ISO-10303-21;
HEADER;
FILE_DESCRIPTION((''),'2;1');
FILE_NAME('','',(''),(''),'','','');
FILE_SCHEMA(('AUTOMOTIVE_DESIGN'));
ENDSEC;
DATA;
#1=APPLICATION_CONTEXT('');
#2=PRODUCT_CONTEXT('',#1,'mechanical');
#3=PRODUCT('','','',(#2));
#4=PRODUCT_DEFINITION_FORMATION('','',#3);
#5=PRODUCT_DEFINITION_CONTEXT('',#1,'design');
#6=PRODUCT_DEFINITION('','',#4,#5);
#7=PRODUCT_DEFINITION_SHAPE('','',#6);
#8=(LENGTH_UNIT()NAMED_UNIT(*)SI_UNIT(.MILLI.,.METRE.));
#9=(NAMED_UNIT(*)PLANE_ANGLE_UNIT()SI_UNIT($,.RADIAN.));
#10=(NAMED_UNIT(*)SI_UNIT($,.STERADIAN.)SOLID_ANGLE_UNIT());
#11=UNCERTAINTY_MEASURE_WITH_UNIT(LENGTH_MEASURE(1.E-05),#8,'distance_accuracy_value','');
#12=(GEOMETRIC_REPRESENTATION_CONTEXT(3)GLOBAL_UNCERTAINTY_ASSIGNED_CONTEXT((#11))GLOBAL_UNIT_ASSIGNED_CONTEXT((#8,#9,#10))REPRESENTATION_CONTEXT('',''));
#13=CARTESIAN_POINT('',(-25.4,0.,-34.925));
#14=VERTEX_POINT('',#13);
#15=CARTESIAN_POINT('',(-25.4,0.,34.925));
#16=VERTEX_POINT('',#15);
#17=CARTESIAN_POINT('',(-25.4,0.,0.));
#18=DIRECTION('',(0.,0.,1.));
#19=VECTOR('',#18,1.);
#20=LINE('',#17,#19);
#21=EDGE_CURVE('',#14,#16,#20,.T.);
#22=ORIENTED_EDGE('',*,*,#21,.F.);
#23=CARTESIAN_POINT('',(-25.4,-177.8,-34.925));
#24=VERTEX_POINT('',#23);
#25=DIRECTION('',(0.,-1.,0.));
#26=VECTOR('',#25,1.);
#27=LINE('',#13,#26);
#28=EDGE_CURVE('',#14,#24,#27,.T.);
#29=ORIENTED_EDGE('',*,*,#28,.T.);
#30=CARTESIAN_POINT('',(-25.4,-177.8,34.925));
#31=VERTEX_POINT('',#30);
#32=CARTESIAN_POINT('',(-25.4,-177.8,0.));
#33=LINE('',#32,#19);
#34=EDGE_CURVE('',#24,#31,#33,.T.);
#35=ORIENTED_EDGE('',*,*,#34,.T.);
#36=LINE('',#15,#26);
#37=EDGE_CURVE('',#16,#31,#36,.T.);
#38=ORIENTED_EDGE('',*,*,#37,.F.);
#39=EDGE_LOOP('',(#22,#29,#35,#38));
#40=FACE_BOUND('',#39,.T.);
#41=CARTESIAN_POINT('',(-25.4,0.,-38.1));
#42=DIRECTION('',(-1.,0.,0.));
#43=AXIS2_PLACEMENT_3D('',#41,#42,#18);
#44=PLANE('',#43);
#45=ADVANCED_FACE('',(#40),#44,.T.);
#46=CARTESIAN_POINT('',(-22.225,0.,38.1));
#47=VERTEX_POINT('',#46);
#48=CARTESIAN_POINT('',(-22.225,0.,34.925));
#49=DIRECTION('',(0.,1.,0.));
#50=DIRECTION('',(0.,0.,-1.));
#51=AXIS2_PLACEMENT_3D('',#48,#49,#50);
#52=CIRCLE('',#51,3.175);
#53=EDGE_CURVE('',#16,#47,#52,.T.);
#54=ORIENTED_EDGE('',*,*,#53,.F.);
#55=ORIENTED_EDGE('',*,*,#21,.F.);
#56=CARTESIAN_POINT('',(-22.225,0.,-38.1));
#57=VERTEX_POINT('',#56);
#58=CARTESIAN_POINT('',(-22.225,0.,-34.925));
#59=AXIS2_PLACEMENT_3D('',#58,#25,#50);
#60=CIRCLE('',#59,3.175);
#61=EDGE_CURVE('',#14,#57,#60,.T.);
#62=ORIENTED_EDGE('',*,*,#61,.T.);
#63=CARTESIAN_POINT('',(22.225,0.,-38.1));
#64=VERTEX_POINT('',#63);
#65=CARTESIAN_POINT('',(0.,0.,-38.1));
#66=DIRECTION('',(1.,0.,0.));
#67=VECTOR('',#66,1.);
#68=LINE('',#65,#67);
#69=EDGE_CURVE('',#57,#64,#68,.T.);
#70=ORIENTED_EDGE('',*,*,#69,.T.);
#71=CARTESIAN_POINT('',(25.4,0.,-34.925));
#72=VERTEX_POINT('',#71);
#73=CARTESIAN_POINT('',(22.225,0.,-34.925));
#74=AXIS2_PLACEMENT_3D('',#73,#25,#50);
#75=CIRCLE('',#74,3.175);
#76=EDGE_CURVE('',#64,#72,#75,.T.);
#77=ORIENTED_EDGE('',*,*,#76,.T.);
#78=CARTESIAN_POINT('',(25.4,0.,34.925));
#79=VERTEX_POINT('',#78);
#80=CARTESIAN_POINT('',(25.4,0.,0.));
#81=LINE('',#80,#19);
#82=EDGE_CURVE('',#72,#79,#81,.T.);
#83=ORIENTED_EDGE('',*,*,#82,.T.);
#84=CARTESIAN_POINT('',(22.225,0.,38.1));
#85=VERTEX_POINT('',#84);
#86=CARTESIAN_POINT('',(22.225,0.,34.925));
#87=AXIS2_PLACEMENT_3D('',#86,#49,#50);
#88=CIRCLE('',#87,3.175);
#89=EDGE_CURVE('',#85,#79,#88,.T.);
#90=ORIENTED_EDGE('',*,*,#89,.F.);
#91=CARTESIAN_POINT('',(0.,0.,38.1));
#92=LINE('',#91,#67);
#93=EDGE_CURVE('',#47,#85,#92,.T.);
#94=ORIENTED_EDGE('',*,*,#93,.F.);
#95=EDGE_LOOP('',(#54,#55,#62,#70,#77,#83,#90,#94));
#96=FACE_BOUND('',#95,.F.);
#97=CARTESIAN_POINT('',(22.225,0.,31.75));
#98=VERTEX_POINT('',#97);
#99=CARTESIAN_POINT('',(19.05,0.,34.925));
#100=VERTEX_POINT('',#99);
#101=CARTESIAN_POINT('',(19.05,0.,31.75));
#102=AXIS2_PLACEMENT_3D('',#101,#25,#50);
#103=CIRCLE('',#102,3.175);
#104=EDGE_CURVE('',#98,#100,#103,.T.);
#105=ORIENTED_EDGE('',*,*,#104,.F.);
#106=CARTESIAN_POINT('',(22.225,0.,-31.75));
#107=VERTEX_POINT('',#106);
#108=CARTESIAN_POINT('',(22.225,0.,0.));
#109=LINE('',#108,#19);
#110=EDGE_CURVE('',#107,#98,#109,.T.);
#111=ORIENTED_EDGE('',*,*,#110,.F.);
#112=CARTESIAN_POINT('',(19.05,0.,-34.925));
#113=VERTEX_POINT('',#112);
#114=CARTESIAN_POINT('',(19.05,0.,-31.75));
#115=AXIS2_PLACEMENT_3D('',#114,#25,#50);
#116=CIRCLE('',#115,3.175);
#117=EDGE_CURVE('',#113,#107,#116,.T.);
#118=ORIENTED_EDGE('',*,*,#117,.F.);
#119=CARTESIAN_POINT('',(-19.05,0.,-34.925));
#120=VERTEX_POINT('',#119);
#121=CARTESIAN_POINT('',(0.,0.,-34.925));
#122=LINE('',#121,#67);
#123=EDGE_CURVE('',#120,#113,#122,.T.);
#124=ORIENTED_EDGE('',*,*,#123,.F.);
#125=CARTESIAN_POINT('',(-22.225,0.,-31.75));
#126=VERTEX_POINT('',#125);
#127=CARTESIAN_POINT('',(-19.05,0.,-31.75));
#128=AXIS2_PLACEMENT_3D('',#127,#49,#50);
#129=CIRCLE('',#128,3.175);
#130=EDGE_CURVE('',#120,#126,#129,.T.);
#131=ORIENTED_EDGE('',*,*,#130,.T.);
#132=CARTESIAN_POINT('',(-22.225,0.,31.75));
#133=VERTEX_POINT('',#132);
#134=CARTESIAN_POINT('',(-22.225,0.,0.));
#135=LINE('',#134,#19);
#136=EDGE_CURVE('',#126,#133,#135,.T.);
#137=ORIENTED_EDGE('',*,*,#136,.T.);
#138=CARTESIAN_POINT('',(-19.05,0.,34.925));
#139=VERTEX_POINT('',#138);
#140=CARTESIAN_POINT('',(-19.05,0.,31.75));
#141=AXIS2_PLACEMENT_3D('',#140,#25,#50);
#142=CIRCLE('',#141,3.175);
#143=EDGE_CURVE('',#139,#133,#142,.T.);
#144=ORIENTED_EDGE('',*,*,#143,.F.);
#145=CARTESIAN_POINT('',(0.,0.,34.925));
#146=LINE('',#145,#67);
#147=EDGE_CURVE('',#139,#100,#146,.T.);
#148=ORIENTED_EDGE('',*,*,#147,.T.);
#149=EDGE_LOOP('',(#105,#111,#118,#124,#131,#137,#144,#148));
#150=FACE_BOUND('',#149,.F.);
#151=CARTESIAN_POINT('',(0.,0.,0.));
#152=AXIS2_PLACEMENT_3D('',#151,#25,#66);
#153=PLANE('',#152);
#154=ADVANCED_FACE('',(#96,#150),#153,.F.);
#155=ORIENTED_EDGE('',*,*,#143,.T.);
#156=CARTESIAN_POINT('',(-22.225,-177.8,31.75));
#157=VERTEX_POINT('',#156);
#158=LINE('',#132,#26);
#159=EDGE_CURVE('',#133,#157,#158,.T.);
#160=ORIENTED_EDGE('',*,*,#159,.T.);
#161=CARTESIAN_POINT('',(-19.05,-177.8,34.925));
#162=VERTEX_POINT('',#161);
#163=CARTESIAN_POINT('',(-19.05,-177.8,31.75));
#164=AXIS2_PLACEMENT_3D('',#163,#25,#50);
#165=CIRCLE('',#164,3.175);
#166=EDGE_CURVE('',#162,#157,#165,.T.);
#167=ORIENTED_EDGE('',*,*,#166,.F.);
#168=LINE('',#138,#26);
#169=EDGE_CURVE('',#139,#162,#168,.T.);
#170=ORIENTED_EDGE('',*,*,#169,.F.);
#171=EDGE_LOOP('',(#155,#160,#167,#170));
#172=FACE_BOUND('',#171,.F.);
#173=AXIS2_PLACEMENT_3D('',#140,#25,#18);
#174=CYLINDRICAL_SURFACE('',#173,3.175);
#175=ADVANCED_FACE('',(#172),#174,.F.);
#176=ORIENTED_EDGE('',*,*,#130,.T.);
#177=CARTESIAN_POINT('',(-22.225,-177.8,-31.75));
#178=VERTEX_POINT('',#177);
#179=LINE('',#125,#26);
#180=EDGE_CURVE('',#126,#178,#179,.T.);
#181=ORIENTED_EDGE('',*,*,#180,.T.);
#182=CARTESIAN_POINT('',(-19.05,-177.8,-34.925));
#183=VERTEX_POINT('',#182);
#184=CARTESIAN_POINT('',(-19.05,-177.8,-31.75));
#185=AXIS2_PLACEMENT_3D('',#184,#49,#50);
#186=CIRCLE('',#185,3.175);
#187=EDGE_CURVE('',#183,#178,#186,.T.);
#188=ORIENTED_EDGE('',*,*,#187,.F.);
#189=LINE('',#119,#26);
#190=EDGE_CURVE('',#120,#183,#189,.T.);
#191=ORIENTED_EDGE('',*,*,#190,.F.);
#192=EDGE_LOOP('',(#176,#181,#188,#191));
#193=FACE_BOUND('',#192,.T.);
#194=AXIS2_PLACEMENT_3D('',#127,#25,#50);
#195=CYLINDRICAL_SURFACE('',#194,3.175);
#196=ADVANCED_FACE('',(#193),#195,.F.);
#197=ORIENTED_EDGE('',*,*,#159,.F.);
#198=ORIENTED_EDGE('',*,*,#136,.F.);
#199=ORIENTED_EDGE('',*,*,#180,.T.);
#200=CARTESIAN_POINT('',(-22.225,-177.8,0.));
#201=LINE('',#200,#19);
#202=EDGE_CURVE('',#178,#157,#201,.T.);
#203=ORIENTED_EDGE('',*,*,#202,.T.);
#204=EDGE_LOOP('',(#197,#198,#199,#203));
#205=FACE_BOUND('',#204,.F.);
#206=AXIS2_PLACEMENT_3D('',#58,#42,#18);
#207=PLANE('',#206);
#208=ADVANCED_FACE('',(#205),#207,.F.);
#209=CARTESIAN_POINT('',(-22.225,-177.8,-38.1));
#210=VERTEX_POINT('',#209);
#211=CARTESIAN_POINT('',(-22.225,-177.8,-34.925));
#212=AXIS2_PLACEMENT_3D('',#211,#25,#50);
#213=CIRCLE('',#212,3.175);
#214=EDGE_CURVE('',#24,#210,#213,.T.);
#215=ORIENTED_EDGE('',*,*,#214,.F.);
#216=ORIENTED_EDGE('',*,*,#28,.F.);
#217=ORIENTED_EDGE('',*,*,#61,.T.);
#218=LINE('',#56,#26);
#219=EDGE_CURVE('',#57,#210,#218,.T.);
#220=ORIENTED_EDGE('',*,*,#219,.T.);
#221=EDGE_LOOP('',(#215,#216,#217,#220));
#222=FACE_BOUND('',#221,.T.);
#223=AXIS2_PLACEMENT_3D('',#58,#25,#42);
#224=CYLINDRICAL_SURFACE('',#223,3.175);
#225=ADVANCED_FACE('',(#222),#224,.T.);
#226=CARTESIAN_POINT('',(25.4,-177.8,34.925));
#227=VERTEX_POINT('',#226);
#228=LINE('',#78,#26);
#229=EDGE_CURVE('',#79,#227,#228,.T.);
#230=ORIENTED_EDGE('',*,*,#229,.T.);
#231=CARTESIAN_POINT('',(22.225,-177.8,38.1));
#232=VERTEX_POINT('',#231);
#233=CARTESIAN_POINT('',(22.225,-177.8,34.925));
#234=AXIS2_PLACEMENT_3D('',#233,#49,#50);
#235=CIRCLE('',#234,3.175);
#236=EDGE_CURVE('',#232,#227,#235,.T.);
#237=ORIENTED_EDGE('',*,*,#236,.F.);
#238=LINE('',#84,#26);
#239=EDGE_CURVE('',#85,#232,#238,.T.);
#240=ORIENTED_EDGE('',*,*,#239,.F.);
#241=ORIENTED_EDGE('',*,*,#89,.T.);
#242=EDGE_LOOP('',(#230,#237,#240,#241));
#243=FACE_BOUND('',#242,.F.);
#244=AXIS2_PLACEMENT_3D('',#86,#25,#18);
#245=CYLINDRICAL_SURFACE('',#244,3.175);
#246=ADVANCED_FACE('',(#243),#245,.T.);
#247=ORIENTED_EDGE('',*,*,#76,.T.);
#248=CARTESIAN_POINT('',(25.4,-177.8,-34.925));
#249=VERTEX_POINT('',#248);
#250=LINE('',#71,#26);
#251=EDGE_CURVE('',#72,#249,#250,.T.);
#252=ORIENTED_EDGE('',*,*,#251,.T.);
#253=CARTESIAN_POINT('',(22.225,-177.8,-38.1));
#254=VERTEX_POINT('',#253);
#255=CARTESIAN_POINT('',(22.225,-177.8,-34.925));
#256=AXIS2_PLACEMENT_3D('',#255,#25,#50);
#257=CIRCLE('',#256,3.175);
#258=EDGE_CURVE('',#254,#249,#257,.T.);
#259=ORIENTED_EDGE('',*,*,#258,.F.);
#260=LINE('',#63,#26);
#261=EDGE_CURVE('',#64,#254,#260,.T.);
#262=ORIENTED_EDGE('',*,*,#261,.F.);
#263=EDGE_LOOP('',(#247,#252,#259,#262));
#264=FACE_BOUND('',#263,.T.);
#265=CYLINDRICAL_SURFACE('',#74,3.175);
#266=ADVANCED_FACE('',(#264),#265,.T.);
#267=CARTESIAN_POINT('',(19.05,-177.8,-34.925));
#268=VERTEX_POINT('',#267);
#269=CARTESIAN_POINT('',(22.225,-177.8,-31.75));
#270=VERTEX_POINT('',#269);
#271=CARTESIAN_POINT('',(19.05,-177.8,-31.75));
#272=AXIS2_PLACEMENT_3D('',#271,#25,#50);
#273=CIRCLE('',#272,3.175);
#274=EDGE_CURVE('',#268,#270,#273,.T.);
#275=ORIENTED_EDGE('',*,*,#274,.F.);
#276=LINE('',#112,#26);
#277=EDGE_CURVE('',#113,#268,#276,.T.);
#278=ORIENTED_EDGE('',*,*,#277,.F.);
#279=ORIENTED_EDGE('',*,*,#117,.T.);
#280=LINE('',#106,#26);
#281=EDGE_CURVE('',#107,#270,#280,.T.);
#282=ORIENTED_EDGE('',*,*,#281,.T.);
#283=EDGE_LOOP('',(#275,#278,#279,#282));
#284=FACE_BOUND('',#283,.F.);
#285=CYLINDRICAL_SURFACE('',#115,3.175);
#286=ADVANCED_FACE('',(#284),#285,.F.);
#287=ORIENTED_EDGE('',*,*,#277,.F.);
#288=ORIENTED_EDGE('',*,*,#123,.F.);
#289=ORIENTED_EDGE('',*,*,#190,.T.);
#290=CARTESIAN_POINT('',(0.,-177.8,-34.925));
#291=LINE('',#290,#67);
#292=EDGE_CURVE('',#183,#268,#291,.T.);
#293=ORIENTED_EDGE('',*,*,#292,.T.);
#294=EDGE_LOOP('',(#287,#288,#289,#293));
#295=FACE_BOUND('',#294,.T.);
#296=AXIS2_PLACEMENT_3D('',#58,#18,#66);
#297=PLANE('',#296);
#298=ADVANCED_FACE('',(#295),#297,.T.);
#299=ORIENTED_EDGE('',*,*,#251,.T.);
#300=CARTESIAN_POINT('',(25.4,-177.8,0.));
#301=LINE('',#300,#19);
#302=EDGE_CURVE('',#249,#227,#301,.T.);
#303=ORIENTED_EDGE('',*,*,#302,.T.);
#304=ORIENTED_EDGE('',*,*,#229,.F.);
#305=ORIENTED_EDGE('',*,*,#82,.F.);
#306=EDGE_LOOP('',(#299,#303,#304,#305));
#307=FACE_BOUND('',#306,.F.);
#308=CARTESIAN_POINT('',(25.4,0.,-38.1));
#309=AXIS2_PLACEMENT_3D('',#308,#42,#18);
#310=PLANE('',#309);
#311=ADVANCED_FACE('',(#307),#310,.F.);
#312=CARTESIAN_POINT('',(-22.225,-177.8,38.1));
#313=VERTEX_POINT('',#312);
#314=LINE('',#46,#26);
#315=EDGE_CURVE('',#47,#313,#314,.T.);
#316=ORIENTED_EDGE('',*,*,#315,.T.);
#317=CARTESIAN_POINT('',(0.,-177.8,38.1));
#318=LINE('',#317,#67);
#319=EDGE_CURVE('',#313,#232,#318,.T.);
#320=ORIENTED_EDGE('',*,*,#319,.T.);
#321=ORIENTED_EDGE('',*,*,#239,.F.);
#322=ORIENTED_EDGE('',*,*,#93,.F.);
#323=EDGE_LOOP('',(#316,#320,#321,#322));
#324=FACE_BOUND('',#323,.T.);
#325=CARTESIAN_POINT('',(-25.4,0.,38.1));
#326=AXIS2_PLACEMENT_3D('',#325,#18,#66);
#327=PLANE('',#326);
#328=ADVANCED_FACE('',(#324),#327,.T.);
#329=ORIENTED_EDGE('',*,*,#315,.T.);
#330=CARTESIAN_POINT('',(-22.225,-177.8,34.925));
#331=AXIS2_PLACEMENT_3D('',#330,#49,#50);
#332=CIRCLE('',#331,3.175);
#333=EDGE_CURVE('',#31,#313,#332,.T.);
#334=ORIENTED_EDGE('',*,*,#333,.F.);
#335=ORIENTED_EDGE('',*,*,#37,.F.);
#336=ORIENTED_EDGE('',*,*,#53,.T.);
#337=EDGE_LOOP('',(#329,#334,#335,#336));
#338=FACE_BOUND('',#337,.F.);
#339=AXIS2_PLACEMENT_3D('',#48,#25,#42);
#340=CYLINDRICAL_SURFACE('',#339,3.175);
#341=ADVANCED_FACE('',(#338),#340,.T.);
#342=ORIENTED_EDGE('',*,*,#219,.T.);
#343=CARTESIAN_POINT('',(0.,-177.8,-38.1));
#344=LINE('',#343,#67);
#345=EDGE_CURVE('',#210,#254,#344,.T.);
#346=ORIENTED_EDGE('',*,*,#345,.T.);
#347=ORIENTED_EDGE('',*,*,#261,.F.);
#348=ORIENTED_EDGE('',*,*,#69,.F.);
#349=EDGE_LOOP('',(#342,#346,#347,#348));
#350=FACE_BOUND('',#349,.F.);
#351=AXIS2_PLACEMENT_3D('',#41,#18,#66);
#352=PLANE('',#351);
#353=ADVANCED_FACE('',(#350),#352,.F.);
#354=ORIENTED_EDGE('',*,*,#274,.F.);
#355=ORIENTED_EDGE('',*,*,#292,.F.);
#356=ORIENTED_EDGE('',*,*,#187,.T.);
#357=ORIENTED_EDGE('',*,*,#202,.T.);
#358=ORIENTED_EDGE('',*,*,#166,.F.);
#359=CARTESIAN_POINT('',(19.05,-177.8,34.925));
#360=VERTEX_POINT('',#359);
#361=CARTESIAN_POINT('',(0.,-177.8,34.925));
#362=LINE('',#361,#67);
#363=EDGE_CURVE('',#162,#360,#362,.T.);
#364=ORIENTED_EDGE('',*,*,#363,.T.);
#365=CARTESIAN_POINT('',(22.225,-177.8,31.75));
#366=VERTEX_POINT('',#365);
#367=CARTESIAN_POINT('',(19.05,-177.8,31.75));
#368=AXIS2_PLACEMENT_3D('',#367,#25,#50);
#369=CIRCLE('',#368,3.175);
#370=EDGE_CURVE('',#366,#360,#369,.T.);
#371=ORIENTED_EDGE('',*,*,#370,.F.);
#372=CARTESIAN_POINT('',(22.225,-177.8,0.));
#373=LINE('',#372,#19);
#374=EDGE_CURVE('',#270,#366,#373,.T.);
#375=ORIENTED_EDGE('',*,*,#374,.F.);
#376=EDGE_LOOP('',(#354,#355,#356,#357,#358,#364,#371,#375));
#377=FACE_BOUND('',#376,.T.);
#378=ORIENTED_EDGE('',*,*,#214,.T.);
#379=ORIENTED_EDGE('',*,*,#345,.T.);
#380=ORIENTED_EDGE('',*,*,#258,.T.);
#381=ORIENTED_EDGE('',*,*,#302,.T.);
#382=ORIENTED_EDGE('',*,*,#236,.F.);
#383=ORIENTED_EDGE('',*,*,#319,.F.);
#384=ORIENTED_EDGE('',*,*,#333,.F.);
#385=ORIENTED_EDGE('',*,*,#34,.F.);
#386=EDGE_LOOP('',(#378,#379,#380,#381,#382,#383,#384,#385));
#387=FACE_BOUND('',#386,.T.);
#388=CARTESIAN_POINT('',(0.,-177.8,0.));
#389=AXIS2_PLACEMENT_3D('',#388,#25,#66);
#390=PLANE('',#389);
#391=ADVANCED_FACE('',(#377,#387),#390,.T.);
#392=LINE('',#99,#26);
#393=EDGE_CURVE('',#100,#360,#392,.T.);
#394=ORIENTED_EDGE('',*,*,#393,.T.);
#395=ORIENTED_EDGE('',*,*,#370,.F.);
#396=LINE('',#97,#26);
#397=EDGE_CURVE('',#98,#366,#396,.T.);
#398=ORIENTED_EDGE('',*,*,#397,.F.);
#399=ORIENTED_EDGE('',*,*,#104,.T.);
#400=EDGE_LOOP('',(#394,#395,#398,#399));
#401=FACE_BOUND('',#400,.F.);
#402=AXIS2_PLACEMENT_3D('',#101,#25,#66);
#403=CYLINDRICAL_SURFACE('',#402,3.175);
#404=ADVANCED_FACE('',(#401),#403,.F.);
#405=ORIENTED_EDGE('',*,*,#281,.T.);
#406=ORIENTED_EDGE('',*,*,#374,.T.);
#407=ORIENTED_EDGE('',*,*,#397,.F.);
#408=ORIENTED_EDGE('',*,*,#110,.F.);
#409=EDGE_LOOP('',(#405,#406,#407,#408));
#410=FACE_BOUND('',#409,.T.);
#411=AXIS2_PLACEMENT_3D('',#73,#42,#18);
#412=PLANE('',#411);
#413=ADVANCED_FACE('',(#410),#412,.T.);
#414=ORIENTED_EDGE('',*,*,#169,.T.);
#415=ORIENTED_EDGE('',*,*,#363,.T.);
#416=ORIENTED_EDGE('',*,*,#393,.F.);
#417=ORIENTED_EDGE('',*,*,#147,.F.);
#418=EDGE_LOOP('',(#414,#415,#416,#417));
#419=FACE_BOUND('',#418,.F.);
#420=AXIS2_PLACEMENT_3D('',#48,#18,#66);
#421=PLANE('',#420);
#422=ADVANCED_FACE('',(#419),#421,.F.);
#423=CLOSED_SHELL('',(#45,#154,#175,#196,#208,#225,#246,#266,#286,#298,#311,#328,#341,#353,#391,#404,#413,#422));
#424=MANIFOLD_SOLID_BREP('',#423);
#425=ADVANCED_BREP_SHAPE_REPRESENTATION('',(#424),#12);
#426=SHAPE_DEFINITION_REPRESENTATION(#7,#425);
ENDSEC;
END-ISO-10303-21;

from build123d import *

# Parameters (mm, degrees)
F0_W     = 50.8
F0_H     = 76.2
F0_W_2   = 44.45
F0_H_2   = 69.85
F2_DEPTH = 177.8
F3_R     = 3.175


# Not quite as in the source:
# - a variable given as a bare number and used for a length is read in inches; the dataset says mm whatever the document's units were


with BuildPart() as f2:
    # F0 (on Front) → F2 (new body)
    with BuildSketch(Plane.XZ):
        Rectangle(F0_W, F0_H)
        Rectangle(F0_W_2, F0_H_2, mode=Mode.SUBTRACT)
    extrude(amount=F2_DEPTH)

    # F3
    f3_edges = [f2.edges().sort_by_distance(p)[0] for p in [
        (-22.225, -88.9, 34.925),
        (22.225, -88.9, 34.925),
        (22.225, -88.9, -34.925),
        (-22.225, -88.9, -34.925),
        (25.4, -88.9, 38.1),
        (25.4, -88.9, -38.1),
        (-25.4, -88.9, 38.1),
        (-25.4, -88.9, -38.1),
    ]]
    fillet(f3_edges, radius=F3_R)


solid = f2.part
